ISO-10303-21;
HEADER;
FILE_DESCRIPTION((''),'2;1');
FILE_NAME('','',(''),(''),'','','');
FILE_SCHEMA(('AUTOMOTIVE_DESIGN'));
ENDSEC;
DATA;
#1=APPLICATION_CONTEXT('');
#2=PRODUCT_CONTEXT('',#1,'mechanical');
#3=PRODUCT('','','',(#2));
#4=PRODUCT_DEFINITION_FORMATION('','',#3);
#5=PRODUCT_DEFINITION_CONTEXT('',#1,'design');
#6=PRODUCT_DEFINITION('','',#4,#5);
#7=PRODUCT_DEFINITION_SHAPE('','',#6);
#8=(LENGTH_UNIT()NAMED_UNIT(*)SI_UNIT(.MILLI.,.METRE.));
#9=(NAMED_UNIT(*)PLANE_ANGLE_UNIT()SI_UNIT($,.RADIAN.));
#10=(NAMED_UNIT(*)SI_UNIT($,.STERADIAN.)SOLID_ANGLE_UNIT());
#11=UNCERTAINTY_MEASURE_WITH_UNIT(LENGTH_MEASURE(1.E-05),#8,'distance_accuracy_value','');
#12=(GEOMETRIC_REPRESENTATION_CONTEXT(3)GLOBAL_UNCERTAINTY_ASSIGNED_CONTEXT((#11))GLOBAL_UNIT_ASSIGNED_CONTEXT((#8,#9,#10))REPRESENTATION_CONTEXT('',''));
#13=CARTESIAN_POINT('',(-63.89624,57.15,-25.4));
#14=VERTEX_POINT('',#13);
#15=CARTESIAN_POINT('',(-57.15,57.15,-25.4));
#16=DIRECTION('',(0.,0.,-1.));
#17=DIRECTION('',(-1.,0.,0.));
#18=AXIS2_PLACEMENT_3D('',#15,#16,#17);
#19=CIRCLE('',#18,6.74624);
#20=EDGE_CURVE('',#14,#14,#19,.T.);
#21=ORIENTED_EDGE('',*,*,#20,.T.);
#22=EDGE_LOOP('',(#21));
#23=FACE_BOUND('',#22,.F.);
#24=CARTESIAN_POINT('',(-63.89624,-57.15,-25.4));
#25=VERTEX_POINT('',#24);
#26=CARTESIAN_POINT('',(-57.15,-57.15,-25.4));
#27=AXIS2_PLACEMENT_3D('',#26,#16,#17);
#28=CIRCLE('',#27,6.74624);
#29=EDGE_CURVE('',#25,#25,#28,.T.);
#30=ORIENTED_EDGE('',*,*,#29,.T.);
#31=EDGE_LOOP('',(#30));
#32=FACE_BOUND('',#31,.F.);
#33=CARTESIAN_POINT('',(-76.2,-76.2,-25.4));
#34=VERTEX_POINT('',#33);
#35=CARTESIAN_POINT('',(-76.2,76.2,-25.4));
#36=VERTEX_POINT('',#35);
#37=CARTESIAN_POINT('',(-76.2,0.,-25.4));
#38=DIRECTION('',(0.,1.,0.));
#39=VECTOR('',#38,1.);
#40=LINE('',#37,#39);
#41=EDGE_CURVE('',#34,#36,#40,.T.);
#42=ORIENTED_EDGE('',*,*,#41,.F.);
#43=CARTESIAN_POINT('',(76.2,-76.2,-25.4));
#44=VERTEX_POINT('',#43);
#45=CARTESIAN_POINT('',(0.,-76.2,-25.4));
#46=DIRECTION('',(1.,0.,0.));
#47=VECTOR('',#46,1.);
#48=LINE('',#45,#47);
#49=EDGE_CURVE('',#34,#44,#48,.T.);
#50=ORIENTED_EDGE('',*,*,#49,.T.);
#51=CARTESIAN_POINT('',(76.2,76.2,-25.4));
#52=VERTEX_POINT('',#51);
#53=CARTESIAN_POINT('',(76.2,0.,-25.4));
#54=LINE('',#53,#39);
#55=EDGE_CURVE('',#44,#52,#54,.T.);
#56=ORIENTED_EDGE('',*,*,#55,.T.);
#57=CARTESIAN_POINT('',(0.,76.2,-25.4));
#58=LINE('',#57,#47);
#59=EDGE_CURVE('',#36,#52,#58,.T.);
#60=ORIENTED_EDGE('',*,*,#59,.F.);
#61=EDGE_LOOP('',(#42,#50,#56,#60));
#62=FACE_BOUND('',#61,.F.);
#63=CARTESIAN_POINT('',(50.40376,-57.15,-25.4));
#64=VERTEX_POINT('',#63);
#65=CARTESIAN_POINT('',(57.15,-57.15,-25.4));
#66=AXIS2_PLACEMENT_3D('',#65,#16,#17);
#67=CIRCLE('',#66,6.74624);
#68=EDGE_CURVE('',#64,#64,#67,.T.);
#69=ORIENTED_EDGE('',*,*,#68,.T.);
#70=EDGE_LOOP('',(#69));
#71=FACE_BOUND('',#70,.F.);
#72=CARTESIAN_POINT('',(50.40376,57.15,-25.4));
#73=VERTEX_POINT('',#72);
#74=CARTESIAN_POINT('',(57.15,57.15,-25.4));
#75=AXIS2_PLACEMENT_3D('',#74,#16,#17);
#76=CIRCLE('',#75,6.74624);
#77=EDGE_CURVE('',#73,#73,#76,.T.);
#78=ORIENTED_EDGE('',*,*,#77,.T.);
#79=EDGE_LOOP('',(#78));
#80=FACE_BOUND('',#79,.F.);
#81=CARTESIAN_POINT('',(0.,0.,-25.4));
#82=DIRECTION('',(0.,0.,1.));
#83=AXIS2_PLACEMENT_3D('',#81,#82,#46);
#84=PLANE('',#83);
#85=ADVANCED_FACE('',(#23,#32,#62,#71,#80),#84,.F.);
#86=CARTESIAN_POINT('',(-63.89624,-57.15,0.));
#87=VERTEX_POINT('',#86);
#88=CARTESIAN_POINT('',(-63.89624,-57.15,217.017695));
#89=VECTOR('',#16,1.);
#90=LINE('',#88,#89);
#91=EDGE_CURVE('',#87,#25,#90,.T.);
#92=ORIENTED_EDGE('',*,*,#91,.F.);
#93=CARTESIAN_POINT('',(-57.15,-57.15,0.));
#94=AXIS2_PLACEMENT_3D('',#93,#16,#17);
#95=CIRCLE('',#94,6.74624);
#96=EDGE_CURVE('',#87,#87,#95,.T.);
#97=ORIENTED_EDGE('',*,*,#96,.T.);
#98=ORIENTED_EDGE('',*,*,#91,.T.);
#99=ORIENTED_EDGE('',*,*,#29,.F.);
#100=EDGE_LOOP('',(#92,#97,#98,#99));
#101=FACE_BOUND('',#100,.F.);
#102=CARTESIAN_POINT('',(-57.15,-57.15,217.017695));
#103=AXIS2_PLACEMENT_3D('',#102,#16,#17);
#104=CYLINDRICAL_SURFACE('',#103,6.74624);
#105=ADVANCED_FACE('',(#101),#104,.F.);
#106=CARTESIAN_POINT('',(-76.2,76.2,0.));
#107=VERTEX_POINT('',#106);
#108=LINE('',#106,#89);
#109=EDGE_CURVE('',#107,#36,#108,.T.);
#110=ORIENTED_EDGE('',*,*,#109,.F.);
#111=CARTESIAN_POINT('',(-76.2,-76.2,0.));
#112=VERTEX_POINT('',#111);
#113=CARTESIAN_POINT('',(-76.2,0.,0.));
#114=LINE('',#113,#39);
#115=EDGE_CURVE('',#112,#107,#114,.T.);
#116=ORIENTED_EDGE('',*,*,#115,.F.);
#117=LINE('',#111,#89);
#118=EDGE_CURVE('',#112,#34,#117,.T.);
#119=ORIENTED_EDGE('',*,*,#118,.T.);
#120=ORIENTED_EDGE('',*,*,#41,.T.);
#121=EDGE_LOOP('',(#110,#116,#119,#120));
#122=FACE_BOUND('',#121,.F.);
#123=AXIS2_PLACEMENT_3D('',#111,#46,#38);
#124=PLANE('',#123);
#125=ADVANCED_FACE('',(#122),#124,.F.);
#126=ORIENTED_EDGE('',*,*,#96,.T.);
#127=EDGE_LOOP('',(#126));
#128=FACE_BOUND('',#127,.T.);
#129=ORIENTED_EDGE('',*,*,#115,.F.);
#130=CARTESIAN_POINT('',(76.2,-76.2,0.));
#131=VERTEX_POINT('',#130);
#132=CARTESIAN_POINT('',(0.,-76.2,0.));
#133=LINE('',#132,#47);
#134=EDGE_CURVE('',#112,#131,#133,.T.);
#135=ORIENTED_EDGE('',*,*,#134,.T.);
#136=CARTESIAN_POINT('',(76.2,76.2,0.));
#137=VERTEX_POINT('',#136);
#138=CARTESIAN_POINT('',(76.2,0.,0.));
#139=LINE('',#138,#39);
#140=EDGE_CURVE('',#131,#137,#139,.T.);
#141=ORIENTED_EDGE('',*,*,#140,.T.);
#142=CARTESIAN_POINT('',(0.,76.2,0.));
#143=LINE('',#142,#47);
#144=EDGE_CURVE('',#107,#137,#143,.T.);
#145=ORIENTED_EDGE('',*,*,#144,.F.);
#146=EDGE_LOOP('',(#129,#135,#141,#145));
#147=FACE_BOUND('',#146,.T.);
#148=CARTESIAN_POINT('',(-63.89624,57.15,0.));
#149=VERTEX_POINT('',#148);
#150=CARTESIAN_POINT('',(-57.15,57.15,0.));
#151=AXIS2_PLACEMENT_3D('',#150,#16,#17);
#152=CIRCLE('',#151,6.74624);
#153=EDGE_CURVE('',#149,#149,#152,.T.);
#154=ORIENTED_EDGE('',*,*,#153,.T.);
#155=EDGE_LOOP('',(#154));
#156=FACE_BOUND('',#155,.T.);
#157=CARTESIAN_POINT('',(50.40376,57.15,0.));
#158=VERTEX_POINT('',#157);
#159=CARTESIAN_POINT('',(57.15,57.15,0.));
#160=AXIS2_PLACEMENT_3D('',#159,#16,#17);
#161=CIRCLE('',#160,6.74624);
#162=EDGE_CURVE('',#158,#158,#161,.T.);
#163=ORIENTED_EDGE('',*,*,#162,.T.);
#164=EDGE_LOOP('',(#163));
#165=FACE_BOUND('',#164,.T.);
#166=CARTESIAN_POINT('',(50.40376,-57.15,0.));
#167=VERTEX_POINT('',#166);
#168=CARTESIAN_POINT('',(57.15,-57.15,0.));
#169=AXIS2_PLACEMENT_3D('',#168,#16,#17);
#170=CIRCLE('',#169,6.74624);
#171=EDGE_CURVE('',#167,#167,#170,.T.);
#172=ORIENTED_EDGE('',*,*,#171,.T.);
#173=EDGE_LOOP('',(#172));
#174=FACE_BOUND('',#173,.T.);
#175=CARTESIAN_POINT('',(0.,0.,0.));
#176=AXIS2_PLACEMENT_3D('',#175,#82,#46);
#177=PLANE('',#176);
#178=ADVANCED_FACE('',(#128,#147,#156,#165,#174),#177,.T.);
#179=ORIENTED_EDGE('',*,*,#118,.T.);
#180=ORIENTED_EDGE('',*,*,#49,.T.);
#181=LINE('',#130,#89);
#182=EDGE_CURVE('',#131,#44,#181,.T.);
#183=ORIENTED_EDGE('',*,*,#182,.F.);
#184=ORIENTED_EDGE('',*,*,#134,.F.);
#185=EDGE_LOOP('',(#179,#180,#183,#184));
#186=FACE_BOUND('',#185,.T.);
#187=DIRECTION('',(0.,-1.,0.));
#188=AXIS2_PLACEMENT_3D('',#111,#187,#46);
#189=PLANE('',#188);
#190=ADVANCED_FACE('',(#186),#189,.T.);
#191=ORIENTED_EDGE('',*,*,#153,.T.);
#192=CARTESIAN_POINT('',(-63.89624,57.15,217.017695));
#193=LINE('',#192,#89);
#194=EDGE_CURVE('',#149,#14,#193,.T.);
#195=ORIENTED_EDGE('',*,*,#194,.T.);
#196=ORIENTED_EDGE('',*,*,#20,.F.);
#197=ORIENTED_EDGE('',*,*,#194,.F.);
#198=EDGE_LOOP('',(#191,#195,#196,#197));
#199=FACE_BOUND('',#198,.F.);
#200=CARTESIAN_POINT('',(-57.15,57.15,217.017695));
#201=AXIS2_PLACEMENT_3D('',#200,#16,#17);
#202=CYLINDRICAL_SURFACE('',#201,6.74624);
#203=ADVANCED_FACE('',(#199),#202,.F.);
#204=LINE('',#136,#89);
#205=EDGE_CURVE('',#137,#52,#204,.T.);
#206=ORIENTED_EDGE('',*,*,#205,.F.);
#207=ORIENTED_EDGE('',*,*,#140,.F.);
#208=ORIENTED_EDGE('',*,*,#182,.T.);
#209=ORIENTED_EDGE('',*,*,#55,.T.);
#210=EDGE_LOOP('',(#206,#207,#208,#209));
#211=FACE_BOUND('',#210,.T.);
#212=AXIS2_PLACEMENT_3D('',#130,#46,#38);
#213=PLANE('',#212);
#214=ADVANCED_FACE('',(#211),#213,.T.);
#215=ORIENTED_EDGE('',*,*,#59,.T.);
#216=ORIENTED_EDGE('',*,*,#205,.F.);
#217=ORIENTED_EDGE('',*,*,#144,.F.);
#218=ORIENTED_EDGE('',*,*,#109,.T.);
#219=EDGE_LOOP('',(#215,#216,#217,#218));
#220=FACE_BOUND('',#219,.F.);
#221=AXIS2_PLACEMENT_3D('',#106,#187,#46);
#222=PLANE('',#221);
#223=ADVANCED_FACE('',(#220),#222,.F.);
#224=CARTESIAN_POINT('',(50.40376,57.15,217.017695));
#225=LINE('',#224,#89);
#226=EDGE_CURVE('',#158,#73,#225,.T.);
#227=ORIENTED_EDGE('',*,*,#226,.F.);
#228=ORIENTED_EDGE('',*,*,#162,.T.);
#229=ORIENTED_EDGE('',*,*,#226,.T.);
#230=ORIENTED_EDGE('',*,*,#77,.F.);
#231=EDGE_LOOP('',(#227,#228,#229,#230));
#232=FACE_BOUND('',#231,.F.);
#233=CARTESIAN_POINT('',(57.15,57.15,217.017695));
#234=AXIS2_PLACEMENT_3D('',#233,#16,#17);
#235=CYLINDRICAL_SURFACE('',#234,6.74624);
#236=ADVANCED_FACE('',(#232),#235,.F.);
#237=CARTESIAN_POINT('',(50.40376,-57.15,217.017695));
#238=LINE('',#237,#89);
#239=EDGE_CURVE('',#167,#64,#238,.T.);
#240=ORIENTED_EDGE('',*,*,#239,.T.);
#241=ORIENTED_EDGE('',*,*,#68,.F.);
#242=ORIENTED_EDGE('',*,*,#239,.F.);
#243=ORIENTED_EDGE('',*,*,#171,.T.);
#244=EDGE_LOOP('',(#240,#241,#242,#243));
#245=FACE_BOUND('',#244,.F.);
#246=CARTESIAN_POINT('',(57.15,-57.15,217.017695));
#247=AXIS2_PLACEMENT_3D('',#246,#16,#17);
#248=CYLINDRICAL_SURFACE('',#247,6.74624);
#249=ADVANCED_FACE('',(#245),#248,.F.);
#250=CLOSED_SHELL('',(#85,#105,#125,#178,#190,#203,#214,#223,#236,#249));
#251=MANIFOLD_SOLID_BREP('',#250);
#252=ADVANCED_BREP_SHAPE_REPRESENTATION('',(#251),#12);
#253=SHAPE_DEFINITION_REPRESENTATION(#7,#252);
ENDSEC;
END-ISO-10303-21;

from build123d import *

# Parameters (mm, degrees)
F0_W     = 152.4
F0_H     = 152.4
F1_DEPTH = 25.4
F3_D     = 13.49248


with BuildPart() as f1:
    # F0 (on Top) → F1 (new body)
    with BuildSketch(Plane.XY):
        Rectangle(F0_W, F0_H)
    extrude(amount=-F1_DEPTH)

    # F3 (through all)
    with Locations(Plane.XY):
        with Locations((-57.15, 57.15), (57.15, 57.15), (-57.15, -57.15), (57.15, -57.15)):
            Hole(F3_D / 2)


solid = f1.part
